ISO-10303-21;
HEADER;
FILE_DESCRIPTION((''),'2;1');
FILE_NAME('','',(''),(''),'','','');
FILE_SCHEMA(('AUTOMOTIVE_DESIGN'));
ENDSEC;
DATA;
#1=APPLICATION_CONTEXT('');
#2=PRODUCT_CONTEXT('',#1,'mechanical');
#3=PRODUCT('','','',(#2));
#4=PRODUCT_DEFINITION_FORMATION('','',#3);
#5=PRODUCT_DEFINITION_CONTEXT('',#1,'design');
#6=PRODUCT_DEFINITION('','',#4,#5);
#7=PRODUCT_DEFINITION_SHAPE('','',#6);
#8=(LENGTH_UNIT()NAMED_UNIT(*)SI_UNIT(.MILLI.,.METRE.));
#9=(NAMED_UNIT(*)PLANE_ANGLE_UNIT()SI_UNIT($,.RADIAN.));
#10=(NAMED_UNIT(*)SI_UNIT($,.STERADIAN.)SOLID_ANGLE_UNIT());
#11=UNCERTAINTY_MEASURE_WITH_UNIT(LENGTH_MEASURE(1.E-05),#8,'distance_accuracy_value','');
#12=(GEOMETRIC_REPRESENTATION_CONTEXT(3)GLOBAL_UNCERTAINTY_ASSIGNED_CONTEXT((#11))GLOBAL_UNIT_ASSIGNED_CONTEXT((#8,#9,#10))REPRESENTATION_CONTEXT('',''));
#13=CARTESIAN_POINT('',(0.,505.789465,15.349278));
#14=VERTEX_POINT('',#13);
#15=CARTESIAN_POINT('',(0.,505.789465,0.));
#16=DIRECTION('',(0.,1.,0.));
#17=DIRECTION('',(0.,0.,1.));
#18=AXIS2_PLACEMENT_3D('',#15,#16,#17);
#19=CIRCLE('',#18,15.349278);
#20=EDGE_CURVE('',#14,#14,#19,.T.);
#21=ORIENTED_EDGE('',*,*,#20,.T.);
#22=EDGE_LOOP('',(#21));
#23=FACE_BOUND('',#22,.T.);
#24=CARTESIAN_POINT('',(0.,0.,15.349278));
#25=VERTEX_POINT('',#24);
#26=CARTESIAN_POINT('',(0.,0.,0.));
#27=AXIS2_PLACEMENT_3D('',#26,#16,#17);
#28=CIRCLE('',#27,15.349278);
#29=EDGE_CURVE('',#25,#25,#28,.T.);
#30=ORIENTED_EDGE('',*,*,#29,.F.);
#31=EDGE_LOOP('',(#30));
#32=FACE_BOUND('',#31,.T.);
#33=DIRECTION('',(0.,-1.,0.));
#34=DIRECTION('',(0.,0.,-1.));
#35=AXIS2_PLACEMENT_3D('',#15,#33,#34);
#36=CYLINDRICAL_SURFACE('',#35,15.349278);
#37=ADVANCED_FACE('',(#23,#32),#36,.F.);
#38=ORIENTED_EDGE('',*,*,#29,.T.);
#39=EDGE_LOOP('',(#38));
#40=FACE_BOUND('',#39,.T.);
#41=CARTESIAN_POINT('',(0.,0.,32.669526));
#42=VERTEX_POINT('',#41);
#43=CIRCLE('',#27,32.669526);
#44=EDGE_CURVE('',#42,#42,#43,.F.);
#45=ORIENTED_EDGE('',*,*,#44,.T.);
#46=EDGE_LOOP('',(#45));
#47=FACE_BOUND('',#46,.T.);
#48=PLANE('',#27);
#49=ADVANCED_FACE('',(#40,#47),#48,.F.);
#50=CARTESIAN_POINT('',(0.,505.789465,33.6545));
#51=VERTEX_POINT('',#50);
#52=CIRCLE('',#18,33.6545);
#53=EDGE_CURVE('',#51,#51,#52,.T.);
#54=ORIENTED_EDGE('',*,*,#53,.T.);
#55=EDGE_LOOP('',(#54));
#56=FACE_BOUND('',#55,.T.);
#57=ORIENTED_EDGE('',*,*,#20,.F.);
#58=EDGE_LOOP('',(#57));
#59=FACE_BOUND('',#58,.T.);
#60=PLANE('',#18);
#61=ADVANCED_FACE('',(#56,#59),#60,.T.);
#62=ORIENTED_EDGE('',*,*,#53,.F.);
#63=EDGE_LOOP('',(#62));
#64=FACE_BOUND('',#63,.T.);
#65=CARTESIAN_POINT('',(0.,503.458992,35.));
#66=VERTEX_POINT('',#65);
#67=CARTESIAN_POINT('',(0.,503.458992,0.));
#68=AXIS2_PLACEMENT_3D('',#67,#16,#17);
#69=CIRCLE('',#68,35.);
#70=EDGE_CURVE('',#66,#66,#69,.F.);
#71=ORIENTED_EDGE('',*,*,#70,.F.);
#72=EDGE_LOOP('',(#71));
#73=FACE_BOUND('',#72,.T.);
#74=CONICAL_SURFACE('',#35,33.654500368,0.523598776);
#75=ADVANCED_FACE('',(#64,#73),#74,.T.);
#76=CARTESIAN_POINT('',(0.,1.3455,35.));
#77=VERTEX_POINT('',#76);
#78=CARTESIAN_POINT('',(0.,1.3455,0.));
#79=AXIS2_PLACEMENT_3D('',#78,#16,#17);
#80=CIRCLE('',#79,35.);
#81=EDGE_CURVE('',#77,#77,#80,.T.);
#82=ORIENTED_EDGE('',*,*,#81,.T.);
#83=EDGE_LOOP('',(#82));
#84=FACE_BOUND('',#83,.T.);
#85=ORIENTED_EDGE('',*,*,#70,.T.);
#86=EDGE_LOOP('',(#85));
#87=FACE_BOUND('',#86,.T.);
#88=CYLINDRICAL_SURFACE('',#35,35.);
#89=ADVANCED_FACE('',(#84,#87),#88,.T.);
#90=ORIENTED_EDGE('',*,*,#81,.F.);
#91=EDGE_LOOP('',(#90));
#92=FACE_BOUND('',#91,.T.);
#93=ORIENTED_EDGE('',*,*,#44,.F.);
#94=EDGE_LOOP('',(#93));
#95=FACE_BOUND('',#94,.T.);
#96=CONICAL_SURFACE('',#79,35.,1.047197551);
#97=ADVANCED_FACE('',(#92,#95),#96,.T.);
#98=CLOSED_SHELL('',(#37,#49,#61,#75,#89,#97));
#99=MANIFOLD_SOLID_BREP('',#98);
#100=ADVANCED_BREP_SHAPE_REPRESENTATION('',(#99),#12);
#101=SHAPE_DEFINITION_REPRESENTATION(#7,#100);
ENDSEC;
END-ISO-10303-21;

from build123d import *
from OCP.BRepFilletAPI import BRepFilletAPI_MakeChamfer

# Parameters (mm, degrees)
SKETCH1_R           = 35
BOSS_EXTRUDE1_DEPTH = 505.789465377
SKETCH2_R           = 15.349277597
CUT_EXTRUDE1_DEPTH  = 509.205650585
CHAMFER1_SIZE       = 2.330473725
CHAMFER1_SIZE2      = 1.345499632


with BuildPart() as part:
    # Sketch1 → Boss-Extrude1 (new body)
    with BuildSketch(Plane(origin=(0, 0, 0), x_dir=(1, 0, 0), z_dir=(0, 1, 0))):
        Circle(SKETCH1_R)
    extrude(amount=BOSS_EXTRUDE1_DEPTH)

    # Sketch2 → Cut-Extrude1 (cut, through all)
    with BuildSketch(Plane(origin=(0, 0, 0), x_dir=(1, 0, 0), z_dir=(0, 1, 0))):
        Circle(SKETCH2_R)
    extrude(amount=CUT_EXTRUDE1_DEPTH, mode=Mode.SUBTRACT)

    # Chamfer1: one chamfer whose edges measure the first distance from different faces: ONE call of the kernel's chamfer builder (chamfer() names one face for all edges)
    chamfer1_edges_1 = [part.edges().sort_by_distance(p)[0] for p in [
        (-35, 505.789465377, 0),
    ]]
    chamfer1_side_1 = [part.faces().sort_by_distance(p)[0] for p in [
        (-35, 252.894732689, 0),
    ]]
    chamfer1_edges_2 = [part.edges().sort_by_distance(p)[0] for p in [
        (-35, 0, 0),
    ]]
    chamfer1_side_2 = [part.faces().sort_by_distance(p)[0] for p in [
        (-34.010050506, 0, 0),
    ]]
    chamfer1 = BRepFilletAPI_MakeChamfer(part.part.solid().wrapped)
    for e in chamfer1_edges_1:
        chamfer1.Add(CHAMFER1_SIZE, CHAMFER1_SIZE2, e.wrapped, chamfer1_side_1[0].wrapped)  # the first distance lies on this face
    for e in chamfer1_edges_2:
        chamfer1.Add(CHAMFER1_SIZE, CHAMFER1_SIZE2, e.wrapped, chamfer1_side_2[0].wrapped)  # the first distance lies on this face
    add(Compound.cast(chamfer1.Shape()), mode=Mode.REPLACE)


solid = part.part
